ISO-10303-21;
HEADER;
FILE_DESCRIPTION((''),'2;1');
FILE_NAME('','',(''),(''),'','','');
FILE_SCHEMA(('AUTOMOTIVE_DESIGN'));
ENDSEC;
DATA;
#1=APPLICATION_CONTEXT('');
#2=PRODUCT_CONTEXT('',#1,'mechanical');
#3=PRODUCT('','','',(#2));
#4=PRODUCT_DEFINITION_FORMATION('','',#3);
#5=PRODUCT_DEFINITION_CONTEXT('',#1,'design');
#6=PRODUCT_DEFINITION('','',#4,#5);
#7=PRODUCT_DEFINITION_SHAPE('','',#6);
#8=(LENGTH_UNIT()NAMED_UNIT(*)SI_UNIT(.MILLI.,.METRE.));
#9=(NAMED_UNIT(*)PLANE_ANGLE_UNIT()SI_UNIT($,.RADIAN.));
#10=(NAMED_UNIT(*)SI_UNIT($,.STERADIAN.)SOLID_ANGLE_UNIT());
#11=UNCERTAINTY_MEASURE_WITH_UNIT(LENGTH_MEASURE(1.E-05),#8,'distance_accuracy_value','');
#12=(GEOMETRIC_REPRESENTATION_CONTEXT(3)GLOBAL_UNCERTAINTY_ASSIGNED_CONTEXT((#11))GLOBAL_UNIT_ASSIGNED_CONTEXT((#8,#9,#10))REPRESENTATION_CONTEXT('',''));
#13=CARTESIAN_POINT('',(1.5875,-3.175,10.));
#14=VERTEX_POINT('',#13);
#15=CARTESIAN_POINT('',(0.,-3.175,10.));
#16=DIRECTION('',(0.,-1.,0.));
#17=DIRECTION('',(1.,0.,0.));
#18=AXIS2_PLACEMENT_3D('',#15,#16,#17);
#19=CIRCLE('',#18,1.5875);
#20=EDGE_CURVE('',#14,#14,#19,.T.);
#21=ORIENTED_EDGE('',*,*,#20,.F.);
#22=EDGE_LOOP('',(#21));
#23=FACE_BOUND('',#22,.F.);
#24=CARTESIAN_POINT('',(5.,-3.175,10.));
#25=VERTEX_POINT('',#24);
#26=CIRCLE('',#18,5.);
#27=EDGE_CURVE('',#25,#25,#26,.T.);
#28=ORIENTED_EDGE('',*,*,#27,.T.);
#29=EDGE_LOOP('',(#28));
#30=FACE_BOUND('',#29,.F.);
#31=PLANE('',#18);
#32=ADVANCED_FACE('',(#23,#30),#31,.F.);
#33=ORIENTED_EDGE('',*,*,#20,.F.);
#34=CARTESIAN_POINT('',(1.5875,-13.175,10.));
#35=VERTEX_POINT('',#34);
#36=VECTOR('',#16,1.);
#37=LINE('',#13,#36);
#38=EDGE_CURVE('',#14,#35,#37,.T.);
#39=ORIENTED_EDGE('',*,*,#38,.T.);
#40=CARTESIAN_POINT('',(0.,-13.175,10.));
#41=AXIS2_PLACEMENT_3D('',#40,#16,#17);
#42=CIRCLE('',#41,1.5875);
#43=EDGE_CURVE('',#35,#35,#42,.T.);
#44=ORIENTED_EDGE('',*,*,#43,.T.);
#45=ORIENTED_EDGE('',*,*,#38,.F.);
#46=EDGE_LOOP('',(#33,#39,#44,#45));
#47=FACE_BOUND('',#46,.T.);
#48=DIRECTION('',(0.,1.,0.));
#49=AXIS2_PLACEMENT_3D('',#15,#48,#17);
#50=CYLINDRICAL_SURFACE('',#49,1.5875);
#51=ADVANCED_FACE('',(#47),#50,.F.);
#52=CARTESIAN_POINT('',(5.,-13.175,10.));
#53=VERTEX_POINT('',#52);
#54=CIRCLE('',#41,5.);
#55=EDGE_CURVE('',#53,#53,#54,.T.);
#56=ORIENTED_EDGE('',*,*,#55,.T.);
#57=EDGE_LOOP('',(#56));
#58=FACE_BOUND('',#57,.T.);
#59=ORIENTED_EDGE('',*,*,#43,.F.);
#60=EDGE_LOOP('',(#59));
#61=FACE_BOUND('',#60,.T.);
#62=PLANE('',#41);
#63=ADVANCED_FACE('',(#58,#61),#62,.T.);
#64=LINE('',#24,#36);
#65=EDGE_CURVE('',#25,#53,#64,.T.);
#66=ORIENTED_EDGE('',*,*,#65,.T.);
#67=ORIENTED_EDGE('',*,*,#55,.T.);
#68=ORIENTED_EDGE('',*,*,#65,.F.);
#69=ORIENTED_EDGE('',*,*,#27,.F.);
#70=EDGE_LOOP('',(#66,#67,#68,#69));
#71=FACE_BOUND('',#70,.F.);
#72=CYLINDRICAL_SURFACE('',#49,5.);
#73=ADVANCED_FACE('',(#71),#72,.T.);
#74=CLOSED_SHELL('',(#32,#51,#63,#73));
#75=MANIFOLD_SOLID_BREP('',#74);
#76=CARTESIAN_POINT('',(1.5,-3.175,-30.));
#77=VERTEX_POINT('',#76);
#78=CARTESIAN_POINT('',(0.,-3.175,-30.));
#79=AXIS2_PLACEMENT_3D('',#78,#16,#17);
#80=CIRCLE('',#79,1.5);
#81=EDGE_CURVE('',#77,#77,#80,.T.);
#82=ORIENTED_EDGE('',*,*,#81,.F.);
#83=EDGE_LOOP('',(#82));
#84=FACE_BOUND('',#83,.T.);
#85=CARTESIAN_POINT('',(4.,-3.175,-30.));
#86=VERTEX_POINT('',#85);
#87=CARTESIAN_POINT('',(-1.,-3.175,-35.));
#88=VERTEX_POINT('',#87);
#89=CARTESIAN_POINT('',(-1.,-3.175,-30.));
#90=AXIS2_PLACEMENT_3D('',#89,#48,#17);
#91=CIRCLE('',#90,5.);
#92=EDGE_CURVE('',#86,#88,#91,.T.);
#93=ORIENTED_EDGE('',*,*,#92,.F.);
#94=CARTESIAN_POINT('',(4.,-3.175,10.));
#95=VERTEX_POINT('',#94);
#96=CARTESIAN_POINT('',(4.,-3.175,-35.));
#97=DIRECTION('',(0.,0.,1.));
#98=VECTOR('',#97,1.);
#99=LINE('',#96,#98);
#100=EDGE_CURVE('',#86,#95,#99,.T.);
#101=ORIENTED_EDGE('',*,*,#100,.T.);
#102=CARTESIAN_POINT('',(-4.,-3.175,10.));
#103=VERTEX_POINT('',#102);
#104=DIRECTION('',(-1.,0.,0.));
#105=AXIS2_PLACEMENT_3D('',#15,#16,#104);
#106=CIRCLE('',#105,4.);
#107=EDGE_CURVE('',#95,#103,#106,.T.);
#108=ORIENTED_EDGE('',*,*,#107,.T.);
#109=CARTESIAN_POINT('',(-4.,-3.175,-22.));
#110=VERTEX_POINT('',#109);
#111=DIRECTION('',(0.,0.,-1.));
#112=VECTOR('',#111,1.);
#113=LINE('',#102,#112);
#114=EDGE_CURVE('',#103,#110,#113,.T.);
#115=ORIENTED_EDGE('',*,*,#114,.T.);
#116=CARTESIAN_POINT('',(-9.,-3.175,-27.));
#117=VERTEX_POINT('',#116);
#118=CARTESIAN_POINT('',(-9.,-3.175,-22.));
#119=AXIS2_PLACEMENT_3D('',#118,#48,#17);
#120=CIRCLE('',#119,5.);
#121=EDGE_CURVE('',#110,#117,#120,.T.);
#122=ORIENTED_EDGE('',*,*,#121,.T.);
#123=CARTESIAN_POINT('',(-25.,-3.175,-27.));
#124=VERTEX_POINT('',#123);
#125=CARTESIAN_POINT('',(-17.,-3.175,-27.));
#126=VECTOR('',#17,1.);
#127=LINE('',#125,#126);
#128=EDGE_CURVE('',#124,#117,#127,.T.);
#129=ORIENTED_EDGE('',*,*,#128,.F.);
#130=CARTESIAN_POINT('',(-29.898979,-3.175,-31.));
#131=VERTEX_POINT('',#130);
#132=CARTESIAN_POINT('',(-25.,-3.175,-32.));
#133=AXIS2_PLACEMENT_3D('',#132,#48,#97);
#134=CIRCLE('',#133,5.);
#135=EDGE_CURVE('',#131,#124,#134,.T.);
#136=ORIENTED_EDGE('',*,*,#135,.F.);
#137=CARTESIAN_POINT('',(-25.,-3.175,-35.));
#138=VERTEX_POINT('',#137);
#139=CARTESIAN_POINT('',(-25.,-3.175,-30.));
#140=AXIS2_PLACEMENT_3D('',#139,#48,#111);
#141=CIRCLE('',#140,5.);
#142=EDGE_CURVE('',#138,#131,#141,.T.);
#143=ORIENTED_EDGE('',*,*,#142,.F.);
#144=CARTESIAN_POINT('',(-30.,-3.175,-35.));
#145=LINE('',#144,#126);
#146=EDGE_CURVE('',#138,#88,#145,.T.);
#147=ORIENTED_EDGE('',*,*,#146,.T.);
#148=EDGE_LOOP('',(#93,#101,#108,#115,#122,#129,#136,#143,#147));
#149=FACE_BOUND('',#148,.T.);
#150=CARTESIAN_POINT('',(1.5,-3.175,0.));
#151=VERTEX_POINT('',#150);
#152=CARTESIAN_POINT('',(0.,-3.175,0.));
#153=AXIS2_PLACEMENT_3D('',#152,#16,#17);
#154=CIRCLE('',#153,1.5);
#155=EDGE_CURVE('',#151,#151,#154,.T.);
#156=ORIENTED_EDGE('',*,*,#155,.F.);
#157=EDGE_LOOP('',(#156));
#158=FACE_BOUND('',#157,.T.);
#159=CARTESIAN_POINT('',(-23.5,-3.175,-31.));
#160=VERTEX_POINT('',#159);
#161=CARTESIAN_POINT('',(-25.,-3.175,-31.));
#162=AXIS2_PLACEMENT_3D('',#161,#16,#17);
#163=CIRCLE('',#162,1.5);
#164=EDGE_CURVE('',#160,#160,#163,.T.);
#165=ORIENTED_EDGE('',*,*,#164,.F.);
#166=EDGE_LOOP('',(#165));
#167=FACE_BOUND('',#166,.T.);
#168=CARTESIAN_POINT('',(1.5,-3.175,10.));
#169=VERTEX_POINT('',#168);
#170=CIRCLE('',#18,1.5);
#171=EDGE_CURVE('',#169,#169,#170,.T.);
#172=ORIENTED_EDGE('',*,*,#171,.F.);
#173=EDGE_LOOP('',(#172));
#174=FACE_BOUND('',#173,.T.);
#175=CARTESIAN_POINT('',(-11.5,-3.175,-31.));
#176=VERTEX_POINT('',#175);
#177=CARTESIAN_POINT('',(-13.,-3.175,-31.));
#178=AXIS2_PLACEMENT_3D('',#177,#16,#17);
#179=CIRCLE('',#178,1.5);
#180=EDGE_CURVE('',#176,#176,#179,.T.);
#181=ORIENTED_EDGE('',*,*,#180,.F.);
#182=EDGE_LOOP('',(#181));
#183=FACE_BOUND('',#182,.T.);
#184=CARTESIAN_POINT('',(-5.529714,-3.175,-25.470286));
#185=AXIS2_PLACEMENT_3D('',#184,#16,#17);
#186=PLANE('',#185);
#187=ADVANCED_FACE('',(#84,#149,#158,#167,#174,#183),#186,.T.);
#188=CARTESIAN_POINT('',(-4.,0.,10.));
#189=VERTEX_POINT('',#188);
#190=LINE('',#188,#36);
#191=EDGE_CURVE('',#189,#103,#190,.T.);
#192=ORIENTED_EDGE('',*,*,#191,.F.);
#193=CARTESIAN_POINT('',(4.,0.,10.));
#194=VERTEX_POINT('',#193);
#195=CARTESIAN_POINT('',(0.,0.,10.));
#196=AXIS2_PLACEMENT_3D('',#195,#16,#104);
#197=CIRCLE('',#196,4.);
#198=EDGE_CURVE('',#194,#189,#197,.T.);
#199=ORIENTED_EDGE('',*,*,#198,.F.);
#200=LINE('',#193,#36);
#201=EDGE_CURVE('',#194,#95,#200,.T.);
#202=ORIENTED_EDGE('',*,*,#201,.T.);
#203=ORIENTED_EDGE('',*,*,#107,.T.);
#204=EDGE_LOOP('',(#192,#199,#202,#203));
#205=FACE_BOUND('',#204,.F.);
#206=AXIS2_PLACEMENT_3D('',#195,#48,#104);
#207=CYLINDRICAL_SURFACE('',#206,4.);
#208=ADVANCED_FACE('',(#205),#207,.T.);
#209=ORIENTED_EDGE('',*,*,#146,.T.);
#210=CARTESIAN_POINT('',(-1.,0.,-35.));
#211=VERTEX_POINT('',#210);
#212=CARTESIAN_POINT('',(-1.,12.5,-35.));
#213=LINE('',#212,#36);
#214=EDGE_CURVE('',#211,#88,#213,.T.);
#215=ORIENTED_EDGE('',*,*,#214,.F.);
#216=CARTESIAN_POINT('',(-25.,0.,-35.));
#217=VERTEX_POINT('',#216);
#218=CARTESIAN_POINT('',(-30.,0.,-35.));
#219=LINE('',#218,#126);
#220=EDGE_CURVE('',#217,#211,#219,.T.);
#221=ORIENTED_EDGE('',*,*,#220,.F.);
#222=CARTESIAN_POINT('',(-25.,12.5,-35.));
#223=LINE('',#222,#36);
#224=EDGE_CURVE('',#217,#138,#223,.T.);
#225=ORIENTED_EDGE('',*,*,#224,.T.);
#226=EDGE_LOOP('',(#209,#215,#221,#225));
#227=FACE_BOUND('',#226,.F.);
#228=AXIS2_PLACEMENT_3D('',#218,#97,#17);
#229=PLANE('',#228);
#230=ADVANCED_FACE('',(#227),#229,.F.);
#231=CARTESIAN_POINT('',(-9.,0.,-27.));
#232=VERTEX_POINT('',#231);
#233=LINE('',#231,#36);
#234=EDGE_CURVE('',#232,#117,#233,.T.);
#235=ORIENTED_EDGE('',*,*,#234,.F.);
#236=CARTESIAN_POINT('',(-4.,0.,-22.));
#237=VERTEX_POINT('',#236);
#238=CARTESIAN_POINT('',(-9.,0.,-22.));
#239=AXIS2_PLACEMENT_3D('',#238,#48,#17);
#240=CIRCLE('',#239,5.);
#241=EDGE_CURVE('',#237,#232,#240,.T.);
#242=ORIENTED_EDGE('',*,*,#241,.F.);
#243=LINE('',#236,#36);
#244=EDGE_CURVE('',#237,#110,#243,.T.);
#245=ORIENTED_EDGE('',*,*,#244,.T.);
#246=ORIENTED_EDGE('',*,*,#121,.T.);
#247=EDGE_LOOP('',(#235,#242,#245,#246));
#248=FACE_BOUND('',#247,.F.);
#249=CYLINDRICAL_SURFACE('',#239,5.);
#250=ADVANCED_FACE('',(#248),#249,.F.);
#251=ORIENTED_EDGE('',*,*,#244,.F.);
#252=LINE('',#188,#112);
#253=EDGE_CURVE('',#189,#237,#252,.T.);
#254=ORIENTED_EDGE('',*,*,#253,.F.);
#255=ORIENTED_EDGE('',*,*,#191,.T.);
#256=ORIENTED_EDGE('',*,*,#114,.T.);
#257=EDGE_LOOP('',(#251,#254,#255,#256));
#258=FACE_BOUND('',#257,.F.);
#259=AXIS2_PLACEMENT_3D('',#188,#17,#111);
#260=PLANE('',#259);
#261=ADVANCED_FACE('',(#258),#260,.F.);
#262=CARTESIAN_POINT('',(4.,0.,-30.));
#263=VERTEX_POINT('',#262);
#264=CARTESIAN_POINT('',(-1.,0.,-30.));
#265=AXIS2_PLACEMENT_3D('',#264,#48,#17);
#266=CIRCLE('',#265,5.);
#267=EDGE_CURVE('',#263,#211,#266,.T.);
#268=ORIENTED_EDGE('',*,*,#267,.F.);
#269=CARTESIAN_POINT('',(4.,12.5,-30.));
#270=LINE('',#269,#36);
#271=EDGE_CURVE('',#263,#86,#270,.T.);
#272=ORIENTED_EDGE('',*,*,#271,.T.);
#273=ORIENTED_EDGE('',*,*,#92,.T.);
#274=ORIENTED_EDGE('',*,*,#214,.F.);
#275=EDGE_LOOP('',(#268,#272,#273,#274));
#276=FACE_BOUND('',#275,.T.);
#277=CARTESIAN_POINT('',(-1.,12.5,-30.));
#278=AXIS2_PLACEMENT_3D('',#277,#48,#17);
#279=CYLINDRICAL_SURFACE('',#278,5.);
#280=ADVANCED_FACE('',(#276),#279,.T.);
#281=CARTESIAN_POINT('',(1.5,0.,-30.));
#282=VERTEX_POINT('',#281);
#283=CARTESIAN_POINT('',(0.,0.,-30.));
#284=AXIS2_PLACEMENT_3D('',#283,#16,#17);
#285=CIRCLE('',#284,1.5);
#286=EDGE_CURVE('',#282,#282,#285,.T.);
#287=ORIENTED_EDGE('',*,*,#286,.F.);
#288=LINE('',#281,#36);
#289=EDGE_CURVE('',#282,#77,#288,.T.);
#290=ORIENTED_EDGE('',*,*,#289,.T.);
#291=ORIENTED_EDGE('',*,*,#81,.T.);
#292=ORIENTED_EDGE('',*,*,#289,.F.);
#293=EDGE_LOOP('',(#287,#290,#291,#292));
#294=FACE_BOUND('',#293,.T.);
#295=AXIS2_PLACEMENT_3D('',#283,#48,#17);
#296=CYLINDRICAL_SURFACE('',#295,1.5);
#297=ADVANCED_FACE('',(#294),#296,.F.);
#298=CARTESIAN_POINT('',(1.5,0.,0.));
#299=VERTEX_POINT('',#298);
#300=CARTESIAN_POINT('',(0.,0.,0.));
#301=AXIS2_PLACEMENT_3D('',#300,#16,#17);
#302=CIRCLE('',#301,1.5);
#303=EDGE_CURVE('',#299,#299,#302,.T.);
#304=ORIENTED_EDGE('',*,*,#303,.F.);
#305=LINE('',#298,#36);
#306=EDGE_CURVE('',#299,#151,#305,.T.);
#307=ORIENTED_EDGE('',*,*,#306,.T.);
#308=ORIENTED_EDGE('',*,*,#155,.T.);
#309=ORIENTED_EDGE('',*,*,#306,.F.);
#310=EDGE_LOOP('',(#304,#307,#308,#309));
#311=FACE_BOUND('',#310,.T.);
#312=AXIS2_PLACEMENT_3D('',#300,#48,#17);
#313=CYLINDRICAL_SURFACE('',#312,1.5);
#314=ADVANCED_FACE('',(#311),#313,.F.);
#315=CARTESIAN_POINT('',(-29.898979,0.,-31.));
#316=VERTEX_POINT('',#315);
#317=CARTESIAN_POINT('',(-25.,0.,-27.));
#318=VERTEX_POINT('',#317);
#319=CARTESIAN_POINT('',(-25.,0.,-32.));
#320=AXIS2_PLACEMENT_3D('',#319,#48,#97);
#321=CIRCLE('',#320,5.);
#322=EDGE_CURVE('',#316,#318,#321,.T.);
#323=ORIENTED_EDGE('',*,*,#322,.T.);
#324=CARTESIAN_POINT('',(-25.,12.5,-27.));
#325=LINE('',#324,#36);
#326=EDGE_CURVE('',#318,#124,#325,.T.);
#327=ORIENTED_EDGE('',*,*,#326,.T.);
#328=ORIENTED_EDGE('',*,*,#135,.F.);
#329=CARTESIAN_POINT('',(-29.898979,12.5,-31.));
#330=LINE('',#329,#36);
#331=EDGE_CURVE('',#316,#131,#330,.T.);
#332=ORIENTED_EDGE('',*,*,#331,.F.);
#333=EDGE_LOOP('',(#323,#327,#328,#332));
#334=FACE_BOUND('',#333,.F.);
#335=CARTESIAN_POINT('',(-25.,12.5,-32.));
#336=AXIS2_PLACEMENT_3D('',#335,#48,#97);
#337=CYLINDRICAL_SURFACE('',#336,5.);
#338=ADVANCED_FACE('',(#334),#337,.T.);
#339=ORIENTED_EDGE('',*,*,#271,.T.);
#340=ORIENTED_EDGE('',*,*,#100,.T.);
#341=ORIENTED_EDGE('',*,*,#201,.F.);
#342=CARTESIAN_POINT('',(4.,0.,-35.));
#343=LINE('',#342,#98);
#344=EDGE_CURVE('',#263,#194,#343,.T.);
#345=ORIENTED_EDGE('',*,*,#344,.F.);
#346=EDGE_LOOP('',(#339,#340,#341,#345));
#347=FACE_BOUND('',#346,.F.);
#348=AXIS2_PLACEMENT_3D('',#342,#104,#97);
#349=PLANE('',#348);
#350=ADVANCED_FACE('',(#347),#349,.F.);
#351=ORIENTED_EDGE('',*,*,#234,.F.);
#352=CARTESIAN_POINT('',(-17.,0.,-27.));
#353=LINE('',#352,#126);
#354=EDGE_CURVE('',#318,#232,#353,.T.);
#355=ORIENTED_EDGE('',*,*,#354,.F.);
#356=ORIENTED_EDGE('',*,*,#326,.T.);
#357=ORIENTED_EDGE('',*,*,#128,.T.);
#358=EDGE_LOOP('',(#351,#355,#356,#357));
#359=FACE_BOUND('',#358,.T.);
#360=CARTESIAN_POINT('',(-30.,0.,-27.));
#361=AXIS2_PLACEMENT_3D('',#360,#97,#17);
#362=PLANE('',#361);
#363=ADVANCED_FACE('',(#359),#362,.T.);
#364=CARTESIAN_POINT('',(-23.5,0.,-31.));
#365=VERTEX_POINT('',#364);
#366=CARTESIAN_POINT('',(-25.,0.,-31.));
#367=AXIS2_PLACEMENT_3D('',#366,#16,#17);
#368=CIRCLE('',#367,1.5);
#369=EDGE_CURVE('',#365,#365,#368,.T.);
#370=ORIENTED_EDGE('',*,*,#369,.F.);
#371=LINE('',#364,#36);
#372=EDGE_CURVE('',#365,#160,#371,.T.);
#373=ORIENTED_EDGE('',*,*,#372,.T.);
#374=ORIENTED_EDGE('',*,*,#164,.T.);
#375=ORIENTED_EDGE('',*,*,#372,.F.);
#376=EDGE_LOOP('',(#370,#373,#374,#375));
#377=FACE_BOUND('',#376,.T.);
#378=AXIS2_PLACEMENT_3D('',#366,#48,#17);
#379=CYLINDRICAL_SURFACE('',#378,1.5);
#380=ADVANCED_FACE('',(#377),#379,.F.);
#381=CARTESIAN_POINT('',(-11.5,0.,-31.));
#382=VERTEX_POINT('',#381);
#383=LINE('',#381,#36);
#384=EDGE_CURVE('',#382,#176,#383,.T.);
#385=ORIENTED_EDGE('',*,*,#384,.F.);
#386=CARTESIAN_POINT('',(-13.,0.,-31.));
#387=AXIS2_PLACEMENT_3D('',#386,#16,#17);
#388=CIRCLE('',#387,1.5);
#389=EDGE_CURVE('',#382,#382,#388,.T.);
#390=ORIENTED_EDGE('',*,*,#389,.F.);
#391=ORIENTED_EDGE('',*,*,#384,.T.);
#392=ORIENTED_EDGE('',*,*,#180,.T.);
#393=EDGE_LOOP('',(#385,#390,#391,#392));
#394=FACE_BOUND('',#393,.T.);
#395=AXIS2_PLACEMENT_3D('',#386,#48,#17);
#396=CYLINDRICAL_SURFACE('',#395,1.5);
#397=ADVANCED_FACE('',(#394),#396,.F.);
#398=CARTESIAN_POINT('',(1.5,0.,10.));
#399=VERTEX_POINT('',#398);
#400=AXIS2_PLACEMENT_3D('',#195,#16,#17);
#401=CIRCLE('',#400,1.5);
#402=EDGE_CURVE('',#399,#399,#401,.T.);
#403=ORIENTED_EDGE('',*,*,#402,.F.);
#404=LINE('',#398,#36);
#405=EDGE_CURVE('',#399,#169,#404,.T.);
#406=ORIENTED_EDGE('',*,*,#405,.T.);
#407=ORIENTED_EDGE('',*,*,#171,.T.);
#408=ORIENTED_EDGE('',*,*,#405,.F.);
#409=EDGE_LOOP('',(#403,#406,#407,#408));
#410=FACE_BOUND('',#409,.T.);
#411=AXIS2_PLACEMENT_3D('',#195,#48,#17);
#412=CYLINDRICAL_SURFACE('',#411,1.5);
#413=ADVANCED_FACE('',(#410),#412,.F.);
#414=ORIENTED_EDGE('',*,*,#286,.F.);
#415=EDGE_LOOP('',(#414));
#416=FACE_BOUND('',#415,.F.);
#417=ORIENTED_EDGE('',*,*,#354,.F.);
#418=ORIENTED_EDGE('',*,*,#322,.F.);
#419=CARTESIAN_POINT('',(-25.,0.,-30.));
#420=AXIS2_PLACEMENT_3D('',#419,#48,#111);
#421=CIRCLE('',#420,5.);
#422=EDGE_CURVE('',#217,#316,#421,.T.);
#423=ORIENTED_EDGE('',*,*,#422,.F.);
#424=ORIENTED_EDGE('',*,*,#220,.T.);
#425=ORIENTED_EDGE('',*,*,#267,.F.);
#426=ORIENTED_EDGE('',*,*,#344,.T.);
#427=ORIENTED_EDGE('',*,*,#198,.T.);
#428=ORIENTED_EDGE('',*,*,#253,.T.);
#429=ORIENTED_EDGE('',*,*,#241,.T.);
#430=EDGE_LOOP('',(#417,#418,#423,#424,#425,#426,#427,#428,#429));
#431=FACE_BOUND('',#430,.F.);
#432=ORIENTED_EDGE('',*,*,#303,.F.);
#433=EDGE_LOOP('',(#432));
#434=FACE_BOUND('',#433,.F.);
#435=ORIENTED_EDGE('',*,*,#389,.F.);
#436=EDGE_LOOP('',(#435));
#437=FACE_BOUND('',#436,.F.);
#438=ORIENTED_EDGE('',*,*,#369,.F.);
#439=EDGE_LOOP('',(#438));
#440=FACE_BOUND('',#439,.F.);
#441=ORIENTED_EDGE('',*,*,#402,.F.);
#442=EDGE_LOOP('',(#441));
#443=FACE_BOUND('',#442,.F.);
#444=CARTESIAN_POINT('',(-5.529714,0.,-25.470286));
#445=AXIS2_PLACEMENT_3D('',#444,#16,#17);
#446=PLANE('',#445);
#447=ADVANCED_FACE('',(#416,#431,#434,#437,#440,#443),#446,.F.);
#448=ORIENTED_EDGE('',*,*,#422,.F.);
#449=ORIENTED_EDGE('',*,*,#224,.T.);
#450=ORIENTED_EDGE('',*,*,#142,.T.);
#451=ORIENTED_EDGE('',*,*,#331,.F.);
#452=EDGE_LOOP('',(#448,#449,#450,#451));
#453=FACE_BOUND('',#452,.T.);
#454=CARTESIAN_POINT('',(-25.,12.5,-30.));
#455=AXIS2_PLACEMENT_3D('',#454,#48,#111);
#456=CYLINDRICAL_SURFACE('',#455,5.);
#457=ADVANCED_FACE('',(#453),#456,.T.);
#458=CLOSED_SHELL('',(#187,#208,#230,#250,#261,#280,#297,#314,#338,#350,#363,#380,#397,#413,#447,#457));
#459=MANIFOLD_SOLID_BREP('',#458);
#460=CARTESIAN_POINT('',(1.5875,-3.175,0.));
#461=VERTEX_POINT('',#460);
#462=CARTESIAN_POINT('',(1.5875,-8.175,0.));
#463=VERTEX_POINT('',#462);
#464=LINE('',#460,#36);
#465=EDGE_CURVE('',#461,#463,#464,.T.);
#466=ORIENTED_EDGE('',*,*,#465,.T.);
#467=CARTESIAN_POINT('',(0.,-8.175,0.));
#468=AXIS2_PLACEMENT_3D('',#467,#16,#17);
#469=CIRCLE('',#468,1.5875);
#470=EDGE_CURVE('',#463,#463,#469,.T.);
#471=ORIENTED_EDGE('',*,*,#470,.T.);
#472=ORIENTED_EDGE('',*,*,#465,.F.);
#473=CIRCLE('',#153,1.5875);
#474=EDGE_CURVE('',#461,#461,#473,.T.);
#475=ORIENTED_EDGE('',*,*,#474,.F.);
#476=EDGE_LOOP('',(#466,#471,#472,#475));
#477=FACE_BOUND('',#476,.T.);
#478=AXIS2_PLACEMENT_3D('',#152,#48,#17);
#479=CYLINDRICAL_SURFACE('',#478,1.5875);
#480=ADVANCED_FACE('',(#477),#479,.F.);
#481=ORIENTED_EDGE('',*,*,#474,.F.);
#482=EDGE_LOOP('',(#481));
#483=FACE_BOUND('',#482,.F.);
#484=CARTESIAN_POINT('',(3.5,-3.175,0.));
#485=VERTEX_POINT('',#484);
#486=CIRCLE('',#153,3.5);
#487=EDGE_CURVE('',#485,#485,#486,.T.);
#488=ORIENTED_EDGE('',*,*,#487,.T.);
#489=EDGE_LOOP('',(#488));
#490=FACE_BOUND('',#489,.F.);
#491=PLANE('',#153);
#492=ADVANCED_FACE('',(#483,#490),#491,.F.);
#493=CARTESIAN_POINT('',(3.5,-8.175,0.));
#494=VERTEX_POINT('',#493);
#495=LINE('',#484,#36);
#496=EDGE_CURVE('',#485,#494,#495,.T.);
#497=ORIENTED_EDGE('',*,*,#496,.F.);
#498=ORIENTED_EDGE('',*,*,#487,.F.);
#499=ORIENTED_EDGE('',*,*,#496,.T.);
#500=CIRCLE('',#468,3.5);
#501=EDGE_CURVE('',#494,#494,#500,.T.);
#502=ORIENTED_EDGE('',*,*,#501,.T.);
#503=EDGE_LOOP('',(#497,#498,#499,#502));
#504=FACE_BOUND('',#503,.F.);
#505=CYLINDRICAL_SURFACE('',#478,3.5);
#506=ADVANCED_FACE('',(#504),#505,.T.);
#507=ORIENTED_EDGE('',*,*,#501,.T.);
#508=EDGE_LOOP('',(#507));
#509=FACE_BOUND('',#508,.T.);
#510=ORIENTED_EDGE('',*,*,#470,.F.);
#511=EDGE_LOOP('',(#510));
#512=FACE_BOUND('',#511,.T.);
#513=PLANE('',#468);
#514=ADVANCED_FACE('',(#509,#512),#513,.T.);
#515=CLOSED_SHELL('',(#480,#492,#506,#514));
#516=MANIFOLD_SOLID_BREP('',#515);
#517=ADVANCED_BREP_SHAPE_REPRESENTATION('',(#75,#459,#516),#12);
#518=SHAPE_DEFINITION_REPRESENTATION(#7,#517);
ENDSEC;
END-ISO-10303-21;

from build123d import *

# Parameters (mm, degrees)
F0_R        = 1.5
F0_W        = 8
F0_H        = 8
F0_W_2      = 26
F1_DEPTH    = 3.175
F2_T1_DEPTH = 3.175
F2_T3_DEPTH = 28.175
F3_R        = 5
F3_R_2      = 1.5875
F4_DEPTH    = 10
F5_R        = 3.5
F5_R_2      = 1.5875
F6_DEPTH    = 5


# Not quite as in the source:
# - a fillet or chamfer that OpenCascade refuses, or shapes differently, is made with other operations: its cross-section is extruded or revolved along the edge and cut away or added
# - a length typed as a fraction of an inch, garbled in the dataset ("3 / 203.2 mm" for 3/8 in), is restored


with BuildPart() as f1:
    # F0 (on Front) → F1 (new body)
    with BuildSketch(Plane.XZ):
        with BuildLine():
            ThreePointArc((4, 10), (0, 14), (-4, 10))
            ThreePointArc((-4, 10), (0, 6), (4, 10))
        make_face()
        with Locations((0, 10)):
            Circle(F0_R, mode=Mode.SUBTRACT)
        with BuildLine():
            ThreePointArc((4, 10), (0, 6), (-4, 10))
            Line((-4, 10), (-4, -27))
            Line((-4, -27), (4, -27))
            Line((4, -27), (4, 10))
        make_face()
        Circle(F0_R, mode=Mode.SUBTRACT)
        with Locations((0, -31)):
            Rectangle(F0_W, F0_H)
        with Locations((0, -30)):
            Circle(F0_R, mode=Mode.SUBTRACT)
        with Locations((-17, -31)):
            Rectangle(F0_W_2, F0_H)
        with Locations((-25, -31)):
            Circle(F0_R, mode=Mode.SUBTRACT)
        with Locations((-13, -31)):
            Circle(F0_R, mode=Mode.SUBTRACT)
    extrude(amount=F1_DEPTH)

    # F2: fillet of radius 5 on 4 edges, made by hand

    # F2_s2 → F2_t1 (join)
    with BuildSketch(Plane.XZ):
        with BuildLine():
            ThreePointArc((-4, -22), (-5.4644660941, -25.5355339059), (-9, -27))
            Line((-9, -27), (-4, -27))
            Line((-4, -27), (-4, -22))
        make_face()
    extrude(amount=F2_T1_DEPTH)

    # F2_s4 → F2_t3 (cut)
    with BuildSketch(Plane.XZ.offset(-12.5)):
        with BuildLine():
            ThreePointArc((4, -30), (2.5355339059, -33.5355339059), (-1, -35))
            Line((-1, -35), (4, -35))
            Line((4, -35), (4, -30))
        make_face()
        with BuildLine():
            ThreePointArc((-25, -27), (-28.5355339059, -28.4644660941), (-30, -32))
            Line((-30, -32), (-30, -27))
            Line((-30, -27), (-25, -27))
        make_face()
        with BuildLine():
            ThreePointArc((-25, -35), (-28.5355339059, -33.5355339059), (-30, -30))
            Line((-30, -30), (-30, -35))
            Line((-30, -35), (-25, -35))
        make_face()
    extrude(amount=F2_T3_DEPTH, mode=Mode.SUBTRACT)


with BuildPart() as f4:
    # F3 (on face) → F4 (new body)
    with BuildSketch(Plane.XZ.offset(3.175)):
        with Locations((0, 10)):
            Circle(F3_R)
        with Locations((0, 10)):
            Circle(F3_R_2, mode=Mode.SUBTRACT)
    extrude(amount=F4_DEPTH)


with BuildPart() as f6:
    # F5 (on face) → F6 (new body)
    with BuildSketch(Plane.XZ.offset(3.175)):
        Circle(F5_R)
        Circle(F5_R_2, mode=Mode.SUBTRACT)
    extrude(amount=F6_DEPTH)


solid = Compound([f1.part, f4.part, f6.part])
